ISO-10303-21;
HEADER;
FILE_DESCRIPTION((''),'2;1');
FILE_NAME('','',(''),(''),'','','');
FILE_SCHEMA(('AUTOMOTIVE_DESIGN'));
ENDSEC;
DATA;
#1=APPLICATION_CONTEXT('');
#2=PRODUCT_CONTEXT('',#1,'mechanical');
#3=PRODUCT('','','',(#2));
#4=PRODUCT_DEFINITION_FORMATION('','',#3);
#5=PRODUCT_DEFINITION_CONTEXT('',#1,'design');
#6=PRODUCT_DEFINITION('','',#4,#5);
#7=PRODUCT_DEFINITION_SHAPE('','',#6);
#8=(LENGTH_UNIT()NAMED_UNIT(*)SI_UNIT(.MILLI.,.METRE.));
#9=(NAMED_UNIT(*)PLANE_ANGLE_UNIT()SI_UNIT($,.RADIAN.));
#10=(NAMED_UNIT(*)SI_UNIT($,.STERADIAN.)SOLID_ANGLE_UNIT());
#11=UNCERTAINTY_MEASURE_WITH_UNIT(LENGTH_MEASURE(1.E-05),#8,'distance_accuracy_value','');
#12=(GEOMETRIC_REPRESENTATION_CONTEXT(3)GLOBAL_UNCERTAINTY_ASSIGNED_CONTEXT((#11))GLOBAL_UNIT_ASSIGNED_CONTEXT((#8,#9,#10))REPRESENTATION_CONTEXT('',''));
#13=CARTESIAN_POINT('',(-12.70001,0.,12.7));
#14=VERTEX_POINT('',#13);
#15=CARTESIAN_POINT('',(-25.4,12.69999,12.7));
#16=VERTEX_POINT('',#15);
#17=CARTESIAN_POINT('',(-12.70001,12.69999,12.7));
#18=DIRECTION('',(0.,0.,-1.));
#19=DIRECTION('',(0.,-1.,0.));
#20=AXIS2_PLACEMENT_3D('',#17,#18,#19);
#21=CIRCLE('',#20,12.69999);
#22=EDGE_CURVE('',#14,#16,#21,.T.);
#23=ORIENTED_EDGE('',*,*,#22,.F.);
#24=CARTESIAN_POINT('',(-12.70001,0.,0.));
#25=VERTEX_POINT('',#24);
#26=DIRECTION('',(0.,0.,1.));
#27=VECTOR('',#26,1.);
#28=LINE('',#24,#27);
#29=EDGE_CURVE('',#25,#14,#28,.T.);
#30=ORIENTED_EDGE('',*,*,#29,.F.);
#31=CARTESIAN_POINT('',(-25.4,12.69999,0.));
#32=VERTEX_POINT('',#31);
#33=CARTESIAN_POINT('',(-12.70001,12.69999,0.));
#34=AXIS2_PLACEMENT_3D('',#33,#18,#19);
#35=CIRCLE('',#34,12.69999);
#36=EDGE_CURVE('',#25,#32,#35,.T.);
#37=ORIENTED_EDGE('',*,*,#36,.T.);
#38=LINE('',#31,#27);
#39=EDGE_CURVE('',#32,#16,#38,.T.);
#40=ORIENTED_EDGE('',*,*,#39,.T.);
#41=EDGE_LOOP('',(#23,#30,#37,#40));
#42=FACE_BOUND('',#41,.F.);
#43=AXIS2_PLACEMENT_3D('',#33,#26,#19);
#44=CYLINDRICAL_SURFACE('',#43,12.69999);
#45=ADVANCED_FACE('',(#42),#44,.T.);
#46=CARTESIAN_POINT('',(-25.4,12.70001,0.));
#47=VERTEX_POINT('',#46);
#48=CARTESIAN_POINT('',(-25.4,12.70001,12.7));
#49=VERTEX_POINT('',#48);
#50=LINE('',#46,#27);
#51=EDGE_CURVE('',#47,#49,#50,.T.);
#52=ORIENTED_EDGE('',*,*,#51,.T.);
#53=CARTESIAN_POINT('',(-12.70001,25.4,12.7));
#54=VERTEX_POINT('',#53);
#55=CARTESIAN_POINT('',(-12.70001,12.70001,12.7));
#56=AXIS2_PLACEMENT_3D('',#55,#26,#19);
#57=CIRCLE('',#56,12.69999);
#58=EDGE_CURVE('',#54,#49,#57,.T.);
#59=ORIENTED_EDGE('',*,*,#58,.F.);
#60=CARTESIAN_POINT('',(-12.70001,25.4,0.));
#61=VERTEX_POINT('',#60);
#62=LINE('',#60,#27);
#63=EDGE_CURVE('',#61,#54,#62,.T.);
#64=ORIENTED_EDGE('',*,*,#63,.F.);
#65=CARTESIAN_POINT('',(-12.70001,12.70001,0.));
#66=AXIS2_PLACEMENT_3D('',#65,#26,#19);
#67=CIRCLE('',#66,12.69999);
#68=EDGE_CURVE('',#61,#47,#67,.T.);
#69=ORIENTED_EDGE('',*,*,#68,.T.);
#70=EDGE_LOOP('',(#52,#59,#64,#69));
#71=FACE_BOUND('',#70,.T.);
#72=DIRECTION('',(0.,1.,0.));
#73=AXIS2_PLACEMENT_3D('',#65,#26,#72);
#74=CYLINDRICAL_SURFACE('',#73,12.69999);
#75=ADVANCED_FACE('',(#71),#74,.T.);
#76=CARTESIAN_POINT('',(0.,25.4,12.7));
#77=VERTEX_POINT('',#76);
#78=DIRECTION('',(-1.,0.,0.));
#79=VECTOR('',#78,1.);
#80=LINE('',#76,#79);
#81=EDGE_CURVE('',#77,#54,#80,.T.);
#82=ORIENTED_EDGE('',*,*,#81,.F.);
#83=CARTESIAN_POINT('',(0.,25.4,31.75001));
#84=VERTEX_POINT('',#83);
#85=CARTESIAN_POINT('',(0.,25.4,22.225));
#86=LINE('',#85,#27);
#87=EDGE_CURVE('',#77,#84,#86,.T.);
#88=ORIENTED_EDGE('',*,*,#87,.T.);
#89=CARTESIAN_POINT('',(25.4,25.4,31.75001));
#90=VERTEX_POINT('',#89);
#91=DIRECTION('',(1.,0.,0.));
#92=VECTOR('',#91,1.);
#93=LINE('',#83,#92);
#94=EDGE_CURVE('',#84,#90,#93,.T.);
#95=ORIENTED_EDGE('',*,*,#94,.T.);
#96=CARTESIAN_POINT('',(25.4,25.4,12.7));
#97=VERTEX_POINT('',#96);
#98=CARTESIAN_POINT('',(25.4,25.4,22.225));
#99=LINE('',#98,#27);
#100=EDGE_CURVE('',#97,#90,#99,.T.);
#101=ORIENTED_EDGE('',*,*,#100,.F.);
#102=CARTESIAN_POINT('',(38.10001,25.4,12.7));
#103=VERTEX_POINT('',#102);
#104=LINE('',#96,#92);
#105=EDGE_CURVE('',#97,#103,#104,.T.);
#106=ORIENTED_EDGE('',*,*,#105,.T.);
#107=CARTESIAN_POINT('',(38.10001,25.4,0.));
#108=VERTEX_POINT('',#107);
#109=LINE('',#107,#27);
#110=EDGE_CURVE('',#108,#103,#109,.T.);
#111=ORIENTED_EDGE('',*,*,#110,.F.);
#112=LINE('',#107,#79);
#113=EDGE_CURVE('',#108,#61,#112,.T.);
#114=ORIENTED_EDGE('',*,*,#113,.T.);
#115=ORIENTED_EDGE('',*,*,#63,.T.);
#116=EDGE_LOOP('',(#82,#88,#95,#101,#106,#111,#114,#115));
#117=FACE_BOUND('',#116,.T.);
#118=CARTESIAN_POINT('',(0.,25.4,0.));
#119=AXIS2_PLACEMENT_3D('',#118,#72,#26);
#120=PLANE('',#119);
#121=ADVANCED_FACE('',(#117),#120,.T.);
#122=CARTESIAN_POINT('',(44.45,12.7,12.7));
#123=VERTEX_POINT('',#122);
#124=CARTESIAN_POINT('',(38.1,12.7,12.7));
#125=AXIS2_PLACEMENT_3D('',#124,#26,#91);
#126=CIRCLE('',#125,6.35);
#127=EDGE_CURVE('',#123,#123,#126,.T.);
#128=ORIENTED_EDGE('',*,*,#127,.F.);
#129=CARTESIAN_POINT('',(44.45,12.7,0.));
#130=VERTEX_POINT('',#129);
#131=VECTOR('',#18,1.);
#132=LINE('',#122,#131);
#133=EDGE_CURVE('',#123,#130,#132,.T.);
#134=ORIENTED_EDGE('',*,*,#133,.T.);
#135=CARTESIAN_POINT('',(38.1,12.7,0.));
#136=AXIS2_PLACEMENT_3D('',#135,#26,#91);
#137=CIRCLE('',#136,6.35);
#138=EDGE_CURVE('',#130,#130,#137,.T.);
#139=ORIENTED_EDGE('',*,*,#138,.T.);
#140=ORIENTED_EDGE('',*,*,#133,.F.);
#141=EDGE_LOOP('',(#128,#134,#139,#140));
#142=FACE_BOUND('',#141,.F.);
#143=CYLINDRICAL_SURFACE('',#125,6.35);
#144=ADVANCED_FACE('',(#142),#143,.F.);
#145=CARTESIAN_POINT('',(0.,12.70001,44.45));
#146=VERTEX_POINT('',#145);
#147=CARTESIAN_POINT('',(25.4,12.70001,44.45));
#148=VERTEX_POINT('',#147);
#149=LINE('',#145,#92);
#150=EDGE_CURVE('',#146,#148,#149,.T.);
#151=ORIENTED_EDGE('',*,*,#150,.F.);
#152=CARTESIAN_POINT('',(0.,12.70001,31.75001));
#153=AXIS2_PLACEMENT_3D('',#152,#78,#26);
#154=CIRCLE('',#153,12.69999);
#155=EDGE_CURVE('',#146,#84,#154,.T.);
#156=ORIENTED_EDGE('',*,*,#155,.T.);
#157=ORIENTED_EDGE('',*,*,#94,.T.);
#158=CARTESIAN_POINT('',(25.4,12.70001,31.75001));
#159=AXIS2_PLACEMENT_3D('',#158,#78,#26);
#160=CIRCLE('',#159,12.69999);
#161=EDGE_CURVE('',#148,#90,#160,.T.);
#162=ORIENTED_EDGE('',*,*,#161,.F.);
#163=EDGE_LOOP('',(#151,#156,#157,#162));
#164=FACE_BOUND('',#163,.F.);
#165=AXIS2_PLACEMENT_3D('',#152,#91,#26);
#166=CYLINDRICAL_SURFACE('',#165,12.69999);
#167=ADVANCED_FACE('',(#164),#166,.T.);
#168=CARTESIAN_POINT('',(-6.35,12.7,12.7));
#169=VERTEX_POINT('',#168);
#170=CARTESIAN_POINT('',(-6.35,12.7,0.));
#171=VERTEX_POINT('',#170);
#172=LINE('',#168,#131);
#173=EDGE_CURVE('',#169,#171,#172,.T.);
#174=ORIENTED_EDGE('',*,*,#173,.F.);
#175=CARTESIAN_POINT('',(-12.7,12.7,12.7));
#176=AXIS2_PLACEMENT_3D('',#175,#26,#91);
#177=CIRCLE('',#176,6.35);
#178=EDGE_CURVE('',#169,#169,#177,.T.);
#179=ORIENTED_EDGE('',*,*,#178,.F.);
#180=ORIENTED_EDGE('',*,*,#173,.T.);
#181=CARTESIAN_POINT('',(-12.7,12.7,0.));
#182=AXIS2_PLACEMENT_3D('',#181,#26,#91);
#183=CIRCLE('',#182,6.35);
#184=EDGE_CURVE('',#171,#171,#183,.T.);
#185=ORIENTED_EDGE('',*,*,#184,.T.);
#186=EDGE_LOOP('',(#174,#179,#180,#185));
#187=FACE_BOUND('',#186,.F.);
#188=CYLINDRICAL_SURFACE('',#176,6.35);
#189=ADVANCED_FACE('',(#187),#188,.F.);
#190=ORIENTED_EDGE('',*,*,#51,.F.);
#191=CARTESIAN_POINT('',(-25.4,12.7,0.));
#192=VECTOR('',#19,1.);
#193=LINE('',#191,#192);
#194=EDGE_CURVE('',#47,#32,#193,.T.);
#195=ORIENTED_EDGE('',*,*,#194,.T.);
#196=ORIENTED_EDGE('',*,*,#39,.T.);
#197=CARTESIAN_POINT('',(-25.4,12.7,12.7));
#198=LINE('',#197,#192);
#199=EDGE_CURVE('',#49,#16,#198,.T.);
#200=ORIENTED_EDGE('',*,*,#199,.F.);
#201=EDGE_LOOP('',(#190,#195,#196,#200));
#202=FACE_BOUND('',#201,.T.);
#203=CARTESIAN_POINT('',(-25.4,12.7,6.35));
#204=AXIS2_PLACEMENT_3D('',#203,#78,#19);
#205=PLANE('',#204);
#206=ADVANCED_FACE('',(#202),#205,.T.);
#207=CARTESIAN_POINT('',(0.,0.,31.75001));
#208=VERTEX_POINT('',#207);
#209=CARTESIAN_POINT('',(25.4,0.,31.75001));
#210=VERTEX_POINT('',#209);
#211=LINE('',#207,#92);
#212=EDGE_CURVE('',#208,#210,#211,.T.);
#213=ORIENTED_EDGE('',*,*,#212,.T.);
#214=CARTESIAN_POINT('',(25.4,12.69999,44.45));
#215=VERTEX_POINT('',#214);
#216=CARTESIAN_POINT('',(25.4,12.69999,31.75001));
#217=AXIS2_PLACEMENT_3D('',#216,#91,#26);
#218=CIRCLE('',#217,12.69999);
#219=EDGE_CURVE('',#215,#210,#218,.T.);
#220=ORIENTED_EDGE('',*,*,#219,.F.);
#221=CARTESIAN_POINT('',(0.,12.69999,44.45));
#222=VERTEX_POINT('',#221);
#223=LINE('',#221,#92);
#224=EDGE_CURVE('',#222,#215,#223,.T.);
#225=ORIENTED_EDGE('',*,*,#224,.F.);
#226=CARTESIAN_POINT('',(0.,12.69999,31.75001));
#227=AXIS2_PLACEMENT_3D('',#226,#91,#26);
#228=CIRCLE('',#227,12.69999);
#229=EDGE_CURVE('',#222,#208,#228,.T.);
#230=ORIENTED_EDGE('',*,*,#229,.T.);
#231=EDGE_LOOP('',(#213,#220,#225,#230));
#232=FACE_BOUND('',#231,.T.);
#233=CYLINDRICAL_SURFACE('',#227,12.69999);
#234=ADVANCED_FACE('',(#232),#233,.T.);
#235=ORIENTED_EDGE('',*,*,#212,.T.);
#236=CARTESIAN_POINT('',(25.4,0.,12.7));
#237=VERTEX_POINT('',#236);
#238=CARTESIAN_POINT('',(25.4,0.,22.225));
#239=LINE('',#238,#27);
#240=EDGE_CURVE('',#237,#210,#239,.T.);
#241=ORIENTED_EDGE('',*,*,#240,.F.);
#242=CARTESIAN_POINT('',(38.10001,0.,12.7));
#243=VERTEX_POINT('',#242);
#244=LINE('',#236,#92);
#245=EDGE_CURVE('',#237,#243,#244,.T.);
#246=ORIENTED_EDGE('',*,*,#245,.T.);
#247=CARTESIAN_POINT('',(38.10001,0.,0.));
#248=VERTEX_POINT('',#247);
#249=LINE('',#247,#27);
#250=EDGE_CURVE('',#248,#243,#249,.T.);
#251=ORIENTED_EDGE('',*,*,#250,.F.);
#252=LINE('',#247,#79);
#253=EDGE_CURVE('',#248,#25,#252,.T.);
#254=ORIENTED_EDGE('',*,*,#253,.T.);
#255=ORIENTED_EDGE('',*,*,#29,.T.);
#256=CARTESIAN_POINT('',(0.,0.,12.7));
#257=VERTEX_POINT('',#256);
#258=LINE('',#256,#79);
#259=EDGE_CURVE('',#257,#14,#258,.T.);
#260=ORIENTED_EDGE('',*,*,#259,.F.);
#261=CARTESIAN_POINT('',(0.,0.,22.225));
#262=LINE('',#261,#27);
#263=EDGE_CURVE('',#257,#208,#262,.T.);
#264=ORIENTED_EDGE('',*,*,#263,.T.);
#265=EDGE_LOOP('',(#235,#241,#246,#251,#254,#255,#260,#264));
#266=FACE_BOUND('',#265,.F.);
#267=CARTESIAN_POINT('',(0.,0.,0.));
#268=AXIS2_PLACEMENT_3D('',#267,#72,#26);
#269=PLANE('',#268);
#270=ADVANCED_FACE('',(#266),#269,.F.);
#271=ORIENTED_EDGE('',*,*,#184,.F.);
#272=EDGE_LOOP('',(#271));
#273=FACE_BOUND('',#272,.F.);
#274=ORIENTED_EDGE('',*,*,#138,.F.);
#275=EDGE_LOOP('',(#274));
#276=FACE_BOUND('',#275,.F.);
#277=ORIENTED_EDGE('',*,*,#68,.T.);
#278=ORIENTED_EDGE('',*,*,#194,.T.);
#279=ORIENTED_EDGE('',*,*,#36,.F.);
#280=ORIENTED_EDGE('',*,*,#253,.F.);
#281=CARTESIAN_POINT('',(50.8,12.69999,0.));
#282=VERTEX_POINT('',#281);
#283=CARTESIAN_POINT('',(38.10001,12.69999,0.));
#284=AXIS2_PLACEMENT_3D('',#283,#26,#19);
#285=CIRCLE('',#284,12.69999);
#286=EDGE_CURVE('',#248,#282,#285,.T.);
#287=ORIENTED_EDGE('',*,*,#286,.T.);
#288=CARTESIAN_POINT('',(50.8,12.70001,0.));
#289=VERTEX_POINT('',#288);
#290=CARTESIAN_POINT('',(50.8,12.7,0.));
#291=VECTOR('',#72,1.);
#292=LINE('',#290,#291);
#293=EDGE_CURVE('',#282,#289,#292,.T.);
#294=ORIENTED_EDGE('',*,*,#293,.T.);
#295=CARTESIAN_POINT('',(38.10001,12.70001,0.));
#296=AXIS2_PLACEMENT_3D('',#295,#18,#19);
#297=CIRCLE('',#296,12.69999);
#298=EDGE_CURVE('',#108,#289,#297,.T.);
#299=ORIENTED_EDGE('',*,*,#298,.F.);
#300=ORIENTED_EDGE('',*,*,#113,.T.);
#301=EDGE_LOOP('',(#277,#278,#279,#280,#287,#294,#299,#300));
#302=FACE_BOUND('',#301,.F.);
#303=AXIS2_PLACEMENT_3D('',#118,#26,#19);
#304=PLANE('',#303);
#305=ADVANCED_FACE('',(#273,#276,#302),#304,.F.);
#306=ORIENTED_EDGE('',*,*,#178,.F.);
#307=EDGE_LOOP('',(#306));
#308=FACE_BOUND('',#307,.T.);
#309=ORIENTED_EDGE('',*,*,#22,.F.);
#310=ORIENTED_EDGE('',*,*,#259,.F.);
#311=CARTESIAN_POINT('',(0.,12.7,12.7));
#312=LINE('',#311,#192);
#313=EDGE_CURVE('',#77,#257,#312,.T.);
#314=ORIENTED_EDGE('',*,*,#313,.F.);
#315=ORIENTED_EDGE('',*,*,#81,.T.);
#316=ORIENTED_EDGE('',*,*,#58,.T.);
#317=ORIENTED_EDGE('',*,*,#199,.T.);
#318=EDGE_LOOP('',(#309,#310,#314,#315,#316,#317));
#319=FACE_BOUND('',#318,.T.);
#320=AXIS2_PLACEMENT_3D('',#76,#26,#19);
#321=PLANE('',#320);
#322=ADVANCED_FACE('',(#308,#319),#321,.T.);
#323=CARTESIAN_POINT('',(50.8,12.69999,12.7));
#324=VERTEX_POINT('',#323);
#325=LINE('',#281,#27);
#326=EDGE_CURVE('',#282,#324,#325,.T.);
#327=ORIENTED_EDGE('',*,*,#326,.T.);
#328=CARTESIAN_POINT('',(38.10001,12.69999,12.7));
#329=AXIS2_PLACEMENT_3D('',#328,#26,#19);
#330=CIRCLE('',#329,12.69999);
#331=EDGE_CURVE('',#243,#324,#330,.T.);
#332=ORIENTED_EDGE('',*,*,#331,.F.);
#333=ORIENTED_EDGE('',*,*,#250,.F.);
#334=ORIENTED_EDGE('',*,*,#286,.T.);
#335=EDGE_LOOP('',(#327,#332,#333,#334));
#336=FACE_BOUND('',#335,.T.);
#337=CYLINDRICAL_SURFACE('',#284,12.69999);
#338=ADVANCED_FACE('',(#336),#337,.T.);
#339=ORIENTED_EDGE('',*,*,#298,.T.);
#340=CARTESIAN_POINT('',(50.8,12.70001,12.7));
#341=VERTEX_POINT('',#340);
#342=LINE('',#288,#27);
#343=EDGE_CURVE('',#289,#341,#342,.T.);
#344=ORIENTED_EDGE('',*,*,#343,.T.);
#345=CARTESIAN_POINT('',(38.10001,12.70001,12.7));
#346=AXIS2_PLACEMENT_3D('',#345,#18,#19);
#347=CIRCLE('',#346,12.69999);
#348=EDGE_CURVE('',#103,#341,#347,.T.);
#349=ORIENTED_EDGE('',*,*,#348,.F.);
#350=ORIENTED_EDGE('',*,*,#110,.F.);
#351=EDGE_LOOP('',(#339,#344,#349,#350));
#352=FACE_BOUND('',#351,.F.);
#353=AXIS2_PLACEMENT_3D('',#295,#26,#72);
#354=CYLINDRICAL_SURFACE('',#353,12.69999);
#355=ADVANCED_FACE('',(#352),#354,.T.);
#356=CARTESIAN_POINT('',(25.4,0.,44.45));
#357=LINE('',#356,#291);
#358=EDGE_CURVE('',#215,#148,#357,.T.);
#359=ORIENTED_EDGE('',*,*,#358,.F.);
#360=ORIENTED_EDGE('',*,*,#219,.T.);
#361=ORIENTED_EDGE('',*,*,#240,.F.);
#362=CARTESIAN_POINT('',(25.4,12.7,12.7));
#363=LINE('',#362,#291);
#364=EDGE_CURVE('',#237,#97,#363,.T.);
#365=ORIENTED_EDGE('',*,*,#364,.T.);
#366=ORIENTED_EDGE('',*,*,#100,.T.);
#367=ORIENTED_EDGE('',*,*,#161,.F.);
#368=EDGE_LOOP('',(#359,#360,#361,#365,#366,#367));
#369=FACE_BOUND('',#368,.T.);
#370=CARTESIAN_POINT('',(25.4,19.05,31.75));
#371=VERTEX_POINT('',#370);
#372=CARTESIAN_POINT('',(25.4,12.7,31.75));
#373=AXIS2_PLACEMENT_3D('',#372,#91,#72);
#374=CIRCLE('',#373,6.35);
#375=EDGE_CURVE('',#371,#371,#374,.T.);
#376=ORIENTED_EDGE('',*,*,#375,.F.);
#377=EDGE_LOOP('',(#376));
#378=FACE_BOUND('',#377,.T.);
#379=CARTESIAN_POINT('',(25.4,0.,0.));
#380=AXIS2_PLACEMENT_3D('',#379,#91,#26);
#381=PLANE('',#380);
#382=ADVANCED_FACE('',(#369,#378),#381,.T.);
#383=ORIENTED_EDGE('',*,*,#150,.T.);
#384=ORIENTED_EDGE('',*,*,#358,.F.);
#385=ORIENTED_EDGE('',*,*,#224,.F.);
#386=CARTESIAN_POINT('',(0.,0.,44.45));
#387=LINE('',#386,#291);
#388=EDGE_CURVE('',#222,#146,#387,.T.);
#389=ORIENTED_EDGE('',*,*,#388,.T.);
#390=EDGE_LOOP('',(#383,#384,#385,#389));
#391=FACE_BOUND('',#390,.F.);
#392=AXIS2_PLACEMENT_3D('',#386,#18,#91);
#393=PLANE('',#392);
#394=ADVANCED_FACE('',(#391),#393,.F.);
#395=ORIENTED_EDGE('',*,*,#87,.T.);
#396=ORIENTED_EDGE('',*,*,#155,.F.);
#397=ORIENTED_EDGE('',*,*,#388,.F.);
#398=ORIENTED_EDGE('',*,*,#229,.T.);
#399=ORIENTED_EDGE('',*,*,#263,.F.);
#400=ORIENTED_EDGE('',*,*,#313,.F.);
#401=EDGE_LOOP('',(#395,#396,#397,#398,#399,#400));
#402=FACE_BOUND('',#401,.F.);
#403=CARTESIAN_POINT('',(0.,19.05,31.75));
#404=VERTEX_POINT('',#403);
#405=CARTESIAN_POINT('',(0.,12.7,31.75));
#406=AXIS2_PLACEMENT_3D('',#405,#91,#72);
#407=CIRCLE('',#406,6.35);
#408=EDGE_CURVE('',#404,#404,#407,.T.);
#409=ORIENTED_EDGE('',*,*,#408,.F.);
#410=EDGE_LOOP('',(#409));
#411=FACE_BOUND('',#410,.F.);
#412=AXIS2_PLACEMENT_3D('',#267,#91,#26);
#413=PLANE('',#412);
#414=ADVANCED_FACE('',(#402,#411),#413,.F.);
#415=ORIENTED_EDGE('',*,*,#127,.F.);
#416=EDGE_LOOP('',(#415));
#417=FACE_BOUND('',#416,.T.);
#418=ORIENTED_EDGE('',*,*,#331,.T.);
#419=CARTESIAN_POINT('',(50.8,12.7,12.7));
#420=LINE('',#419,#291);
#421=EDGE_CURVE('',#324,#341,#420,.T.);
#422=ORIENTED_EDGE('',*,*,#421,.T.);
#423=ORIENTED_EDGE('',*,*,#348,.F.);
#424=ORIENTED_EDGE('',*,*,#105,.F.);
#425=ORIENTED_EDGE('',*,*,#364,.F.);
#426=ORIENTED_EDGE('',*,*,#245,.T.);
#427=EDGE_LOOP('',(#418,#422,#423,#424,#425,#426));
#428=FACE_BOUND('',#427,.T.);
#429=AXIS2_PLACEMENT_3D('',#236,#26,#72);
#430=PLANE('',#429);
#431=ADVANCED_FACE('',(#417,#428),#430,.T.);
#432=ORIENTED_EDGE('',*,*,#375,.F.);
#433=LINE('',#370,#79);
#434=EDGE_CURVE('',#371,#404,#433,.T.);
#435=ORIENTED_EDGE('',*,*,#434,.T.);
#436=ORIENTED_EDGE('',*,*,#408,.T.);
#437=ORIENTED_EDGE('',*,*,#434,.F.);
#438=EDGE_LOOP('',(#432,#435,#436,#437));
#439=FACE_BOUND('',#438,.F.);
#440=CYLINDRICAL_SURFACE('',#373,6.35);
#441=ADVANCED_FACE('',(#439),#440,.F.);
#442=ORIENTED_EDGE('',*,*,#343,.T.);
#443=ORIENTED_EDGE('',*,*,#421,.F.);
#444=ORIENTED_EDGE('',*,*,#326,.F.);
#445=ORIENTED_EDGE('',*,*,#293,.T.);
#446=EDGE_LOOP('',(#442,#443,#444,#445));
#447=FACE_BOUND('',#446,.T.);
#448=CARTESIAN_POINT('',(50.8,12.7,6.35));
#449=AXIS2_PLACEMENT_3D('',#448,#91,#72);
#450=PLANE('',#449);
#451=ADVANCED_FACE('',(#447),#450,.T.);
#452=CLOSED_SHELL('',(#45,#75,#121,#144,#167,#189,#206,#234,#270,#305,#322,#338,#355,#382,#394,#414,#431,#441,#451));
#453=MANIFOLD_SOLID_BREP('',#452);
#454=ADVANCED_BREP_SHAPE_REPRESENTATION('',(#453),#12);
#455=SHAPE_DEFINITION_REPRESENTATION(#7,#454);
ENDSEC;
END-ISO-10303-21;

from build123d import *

# Parameters (mm, degrees)
F0_W      = 25.4
F0_H      = 44.45
F1_DEPTH  = 25.4
F2_R      = 12.69999
F3_W      = 25.4
F3_H      = 12.7
F4_DEPTH  = 25.4
F5_R      = 12.69999
F7_W      = 25.4
F7_H      = 12.7
F8_DEPTH  = 25.4
F9_R      = 12.69999
F11_R     = 6.35
F12_DEPTH = 25.4
F6_R      = 6.35
F13_DEPTH = 25.4
F10_R     = 6.35
F14_DEPTH = 25.4


# Not quite as in the source:
# - a fillet or chamfer is up to 0.001 mm smaller than in the source, because OpenCascade refuses the exact size


with BuildPart() as f1:
    # F0 (on Front) → F1 (new body)
    with BuildSketch(Plane.XZ):
        with Locations((12.7, 22.225)):
            Rectangle(F0_W, F0_H)
    extrude(amount=-F1_DEPTH)

    # F2 (radius 12.7 in the source; OpenCascade refuses exactly that, so slightly less here)
    f2_edges = [f1.edges().sort_by_distance(p)[0] for p in [
        (12.7, 0, 44.45),
        (12.7, 25.4, 44.45),
    ]]
    fillet(f2_edges, radius=F2_R)

    # F3 (on face) → F4 (join)
    with BuildSketch(Plane.YZ.offset(25.4)):
        with Locations((12.7, 6.35)):
            Rectangle(F3_W, F3_H)
    extrude(amount=F4_DEPTH)

    # F5 (radius 12.7 in the source; OpenCascade refuses exactly that, so slightly less here)
    f5_edges = [f1.edges().sort_by_distance(p)[0] for p in [
        (50.8, 0, 6.35),
        (50.8, 25.4, 6.35),
    ]]
    fillet(f5_edges, radius=F5_R)

    # F7 (on face) → F8 (join)
    with BuildSketch(Plane(origin=(0, 0, 0), x_dir=(0, -1, 0), z_dir=(-1, 0, 0))):
        with Locations((-12.7, 6.35)):
            Rectangle(F7_W, F7_H)
    extrude(amount=F8_DEPTH)

    # F9 (radius 12.7 in the source; OpenCascade refuses exactly that, so slightly less here)
    f9_edges = [f1.edges().sort_by_distance(p)[0] for p in [
        (-25.4, 25.4, 6.35),
        (-25.4, 0, 6.35),
    ]]
    fillet(f9_edges, radius=F9_R)

    # F11 (on face) → F12 (cut)
    with BuildSketch(Plane.YZ.offset(25.4)):
        with Locations((12.7, 31.75)):
            Circle(F11_R)
    extrude(amount=-F12_DEPTH, mode=Mode.SUBTRACT)

    # F6 (on face) → F13 (cut)
    with BuildSketch(Plane.XY.offset(12.7)):
        with Locations((38.1, 12.7)):
            Circle(F6_R)
    extrude(amount=-F13_DEPTH, mode=Mode.SUBTRACT)

    # F10 (on face) → F14 (cut)
    with BuildSketch(Plane.XY.offset(12.7)):
        with Locations((-12.7, 12.7)):
            Circle(F10_R)
    extrude(amount=-F14_DEPTH, mode=Mode.SUBTRACT)


solid = f1.part
